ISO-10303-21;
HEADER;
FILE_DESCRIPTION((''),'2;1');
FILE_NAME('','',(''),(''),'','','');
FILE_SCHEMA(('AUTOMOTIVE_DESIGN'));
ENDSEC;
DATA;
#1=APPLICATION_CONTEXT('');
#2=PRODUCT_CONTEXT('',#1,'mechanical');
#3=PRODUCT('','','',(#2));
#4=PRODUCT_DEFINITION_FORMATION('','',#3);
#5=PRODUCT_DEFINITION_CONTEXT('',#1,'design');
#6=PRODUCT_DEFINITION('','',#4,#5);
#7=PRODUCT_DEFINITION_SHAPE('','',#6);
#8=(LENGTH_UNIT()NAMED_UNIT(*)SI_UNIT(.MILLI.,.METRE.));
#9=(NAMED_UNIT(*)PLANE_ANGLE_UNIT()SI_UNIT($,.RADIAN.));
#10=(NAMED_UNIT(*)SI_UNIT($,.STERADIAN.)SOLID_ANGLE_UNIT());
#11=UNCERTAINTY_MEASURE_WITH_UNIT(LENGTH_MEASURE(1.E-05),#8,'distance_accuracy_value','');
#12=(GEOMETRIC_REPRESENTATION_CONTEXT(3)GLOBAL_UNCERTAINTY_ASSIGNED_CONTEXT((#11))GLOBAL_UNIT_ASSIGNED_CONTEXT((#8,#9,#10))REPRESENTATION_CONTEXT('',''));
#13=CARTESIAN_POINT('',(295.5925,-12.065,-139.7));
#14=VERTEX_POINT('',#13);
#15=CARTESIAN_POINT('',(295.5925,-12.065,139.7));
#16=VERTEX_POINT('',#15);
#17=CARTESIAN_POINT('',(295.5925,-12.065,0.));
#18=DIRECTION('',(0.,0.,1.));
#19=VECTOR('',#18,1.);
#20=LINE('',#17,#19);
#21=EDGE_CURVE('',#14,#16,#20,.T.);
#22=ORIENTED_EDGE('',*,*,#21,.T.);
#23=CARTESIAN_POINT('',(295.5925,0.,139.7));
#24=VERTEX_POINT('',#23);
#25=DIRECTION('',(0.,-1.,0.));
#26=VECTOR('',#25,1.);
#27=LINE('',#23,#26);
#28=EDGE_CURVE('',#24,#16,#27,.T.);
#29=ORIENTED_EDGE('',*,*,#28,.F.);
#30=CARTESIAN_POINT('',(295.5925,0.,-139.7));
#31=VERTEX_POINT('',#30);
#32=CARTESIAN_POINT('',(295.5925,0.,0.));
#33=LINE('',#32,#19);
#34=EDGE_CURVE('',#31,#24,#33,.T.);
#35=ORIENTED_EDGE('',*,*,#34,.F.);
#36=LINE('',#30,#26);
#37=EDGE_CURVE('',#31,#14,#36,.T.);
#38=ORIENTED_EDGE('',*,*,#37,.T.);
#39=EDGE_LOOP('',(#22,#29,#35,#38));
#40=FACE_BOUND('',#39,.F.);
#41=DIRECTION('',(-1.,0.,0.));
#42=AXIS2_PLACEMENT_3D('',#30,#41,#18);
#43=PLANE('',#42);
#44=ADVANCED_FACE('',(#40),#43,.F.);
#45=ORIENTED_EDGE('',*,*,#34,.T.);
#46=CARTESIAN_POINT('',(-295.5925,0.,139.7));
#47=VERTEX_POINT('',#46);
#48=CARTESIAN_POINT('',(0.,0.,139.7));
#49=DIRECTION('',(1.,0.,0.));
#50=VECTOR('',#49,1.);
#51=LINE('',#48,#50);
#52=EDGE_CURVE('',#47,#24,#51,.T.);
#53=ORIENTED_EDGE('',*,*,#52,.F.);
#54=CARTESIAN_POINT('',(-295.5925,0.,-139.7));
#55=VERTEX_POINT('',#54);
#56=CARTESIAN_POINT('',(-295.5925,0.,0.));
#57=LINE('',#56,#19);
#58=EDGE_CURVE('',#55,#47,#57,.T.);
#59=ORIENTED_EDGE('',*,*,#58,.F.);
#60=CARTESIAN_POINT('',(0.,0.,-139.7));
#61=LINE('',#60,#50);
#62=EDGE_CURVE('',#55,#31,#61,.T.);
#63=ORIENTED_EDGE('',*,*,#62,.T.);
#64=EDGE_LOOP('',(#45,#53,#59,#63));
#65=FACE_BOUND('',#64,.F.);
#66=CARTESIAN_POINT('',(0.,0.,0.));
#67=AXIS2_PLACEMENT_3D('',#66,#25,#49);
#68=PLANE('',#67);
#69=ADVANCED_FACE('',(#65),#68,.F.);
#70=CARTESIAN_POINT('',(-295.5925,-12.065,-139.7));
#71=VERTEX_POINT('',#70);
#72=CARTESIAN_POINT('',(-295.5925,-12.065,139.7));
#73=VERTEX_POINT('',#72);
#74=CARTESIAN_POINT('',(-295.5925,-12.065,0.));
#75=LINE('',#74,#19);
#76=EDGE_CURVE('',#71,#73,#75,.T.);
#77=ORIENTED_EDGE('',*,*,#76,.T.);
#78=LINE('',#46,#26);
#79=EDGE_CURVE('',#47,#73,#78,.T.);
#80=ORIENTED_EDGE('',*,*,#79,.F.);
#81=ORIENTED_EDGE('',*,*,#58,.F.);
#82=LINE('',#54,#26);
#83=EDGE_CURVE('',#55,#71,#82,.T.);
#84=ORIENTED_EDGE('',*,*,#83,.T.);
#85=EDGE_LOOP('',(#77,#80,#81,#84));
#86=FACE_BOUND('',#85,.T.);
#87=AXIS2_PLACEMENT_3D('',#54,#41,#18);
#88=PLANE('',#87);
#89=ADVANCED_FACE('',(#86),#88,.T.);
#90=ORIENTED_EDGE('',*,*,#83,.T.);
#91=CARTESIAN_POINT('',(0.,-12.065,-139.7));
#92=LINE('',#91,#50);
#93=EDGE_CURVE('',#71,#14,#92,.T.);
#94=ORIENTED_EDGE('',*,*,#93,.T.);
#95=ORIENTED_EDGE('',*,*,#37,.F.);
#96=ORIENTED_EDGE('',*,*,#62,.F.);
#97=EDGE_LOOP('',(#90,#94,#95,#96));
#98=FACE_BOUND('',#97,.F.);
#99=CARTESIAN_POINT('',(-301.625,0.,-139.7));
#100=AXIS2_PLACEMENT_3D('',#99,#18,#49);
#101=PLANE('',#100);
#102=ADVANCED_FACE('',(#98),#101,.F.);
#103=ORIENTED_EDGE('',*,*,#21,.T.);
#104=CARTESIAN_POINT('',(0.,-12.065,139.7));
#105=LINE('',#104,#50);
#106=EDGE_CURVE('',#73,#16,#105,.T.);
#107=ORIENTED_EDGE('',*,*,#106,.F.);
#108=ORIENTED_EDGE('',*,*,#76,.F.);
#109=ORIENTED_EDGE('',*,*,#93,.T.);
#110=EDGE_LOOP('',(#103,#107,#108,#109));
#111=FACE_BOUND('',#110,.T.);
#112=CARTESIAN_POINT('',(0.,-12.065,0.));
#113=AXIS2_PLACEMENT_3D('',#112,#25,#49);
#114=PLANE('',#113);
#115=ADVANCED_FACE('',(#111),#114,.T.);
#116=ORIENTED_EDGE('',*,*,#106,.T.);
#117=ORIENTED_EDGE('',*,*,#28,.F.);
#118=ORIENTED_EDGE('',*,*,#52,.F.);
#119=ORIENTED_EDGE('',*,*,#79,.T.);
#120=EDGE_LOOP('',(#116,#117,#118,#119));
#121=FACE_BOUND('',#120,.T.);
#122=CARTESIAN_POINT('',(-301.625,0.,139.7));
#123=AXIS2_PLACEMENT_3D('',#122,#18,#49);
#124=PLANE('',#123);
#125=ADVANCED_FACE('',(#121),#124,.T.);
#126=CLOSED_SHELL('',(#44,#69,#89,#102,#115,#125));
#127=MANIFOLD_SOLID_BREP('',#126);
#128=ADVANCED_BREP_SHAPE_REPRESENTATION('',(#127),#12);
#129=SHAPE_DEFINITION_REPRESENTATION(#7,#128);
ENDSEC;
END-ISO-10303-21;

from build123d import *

# Parameters (mm, degrees)
F0_W     = 603.25
F0_H     = 279.4
F2_DEPTH = 12.065
F3_DEPTH = 6.0325
F4_DEPTH = 6.0325


# Not quite as in the source:
# - a variable given as a bare number and used for a length is read in inches; the dataset says mm whatever the document's units were


with BuildPart() as f2:
    # F0 (on Front) → F2 (new body)
    with BuildSketch(Plane.XZ):
        Rectangle(F0_W, F0_H)
    extrude(amount=F2_DEPTH)

    # F3 (cut): a face of the model
    f3_faces = [f2.faces().sort_by_distance(p)[0] for p in [
        (301.625, -6.0325, 0),
    ]]
    extrude(f3_faces, amount=-F3_DEPTH, mode=Mode.SUBTRACT)

    # F4 (cut): a face of the model
    f4_faces = [f2.faces().sort_by_distance(p)[0] for p in [
        (-301.625, -6.0325, 0),
    ]]
    extrude(f4_faces, amount=-F4_DEPTH, mode=Mode.SUBTRACT)


solid = f2.part
